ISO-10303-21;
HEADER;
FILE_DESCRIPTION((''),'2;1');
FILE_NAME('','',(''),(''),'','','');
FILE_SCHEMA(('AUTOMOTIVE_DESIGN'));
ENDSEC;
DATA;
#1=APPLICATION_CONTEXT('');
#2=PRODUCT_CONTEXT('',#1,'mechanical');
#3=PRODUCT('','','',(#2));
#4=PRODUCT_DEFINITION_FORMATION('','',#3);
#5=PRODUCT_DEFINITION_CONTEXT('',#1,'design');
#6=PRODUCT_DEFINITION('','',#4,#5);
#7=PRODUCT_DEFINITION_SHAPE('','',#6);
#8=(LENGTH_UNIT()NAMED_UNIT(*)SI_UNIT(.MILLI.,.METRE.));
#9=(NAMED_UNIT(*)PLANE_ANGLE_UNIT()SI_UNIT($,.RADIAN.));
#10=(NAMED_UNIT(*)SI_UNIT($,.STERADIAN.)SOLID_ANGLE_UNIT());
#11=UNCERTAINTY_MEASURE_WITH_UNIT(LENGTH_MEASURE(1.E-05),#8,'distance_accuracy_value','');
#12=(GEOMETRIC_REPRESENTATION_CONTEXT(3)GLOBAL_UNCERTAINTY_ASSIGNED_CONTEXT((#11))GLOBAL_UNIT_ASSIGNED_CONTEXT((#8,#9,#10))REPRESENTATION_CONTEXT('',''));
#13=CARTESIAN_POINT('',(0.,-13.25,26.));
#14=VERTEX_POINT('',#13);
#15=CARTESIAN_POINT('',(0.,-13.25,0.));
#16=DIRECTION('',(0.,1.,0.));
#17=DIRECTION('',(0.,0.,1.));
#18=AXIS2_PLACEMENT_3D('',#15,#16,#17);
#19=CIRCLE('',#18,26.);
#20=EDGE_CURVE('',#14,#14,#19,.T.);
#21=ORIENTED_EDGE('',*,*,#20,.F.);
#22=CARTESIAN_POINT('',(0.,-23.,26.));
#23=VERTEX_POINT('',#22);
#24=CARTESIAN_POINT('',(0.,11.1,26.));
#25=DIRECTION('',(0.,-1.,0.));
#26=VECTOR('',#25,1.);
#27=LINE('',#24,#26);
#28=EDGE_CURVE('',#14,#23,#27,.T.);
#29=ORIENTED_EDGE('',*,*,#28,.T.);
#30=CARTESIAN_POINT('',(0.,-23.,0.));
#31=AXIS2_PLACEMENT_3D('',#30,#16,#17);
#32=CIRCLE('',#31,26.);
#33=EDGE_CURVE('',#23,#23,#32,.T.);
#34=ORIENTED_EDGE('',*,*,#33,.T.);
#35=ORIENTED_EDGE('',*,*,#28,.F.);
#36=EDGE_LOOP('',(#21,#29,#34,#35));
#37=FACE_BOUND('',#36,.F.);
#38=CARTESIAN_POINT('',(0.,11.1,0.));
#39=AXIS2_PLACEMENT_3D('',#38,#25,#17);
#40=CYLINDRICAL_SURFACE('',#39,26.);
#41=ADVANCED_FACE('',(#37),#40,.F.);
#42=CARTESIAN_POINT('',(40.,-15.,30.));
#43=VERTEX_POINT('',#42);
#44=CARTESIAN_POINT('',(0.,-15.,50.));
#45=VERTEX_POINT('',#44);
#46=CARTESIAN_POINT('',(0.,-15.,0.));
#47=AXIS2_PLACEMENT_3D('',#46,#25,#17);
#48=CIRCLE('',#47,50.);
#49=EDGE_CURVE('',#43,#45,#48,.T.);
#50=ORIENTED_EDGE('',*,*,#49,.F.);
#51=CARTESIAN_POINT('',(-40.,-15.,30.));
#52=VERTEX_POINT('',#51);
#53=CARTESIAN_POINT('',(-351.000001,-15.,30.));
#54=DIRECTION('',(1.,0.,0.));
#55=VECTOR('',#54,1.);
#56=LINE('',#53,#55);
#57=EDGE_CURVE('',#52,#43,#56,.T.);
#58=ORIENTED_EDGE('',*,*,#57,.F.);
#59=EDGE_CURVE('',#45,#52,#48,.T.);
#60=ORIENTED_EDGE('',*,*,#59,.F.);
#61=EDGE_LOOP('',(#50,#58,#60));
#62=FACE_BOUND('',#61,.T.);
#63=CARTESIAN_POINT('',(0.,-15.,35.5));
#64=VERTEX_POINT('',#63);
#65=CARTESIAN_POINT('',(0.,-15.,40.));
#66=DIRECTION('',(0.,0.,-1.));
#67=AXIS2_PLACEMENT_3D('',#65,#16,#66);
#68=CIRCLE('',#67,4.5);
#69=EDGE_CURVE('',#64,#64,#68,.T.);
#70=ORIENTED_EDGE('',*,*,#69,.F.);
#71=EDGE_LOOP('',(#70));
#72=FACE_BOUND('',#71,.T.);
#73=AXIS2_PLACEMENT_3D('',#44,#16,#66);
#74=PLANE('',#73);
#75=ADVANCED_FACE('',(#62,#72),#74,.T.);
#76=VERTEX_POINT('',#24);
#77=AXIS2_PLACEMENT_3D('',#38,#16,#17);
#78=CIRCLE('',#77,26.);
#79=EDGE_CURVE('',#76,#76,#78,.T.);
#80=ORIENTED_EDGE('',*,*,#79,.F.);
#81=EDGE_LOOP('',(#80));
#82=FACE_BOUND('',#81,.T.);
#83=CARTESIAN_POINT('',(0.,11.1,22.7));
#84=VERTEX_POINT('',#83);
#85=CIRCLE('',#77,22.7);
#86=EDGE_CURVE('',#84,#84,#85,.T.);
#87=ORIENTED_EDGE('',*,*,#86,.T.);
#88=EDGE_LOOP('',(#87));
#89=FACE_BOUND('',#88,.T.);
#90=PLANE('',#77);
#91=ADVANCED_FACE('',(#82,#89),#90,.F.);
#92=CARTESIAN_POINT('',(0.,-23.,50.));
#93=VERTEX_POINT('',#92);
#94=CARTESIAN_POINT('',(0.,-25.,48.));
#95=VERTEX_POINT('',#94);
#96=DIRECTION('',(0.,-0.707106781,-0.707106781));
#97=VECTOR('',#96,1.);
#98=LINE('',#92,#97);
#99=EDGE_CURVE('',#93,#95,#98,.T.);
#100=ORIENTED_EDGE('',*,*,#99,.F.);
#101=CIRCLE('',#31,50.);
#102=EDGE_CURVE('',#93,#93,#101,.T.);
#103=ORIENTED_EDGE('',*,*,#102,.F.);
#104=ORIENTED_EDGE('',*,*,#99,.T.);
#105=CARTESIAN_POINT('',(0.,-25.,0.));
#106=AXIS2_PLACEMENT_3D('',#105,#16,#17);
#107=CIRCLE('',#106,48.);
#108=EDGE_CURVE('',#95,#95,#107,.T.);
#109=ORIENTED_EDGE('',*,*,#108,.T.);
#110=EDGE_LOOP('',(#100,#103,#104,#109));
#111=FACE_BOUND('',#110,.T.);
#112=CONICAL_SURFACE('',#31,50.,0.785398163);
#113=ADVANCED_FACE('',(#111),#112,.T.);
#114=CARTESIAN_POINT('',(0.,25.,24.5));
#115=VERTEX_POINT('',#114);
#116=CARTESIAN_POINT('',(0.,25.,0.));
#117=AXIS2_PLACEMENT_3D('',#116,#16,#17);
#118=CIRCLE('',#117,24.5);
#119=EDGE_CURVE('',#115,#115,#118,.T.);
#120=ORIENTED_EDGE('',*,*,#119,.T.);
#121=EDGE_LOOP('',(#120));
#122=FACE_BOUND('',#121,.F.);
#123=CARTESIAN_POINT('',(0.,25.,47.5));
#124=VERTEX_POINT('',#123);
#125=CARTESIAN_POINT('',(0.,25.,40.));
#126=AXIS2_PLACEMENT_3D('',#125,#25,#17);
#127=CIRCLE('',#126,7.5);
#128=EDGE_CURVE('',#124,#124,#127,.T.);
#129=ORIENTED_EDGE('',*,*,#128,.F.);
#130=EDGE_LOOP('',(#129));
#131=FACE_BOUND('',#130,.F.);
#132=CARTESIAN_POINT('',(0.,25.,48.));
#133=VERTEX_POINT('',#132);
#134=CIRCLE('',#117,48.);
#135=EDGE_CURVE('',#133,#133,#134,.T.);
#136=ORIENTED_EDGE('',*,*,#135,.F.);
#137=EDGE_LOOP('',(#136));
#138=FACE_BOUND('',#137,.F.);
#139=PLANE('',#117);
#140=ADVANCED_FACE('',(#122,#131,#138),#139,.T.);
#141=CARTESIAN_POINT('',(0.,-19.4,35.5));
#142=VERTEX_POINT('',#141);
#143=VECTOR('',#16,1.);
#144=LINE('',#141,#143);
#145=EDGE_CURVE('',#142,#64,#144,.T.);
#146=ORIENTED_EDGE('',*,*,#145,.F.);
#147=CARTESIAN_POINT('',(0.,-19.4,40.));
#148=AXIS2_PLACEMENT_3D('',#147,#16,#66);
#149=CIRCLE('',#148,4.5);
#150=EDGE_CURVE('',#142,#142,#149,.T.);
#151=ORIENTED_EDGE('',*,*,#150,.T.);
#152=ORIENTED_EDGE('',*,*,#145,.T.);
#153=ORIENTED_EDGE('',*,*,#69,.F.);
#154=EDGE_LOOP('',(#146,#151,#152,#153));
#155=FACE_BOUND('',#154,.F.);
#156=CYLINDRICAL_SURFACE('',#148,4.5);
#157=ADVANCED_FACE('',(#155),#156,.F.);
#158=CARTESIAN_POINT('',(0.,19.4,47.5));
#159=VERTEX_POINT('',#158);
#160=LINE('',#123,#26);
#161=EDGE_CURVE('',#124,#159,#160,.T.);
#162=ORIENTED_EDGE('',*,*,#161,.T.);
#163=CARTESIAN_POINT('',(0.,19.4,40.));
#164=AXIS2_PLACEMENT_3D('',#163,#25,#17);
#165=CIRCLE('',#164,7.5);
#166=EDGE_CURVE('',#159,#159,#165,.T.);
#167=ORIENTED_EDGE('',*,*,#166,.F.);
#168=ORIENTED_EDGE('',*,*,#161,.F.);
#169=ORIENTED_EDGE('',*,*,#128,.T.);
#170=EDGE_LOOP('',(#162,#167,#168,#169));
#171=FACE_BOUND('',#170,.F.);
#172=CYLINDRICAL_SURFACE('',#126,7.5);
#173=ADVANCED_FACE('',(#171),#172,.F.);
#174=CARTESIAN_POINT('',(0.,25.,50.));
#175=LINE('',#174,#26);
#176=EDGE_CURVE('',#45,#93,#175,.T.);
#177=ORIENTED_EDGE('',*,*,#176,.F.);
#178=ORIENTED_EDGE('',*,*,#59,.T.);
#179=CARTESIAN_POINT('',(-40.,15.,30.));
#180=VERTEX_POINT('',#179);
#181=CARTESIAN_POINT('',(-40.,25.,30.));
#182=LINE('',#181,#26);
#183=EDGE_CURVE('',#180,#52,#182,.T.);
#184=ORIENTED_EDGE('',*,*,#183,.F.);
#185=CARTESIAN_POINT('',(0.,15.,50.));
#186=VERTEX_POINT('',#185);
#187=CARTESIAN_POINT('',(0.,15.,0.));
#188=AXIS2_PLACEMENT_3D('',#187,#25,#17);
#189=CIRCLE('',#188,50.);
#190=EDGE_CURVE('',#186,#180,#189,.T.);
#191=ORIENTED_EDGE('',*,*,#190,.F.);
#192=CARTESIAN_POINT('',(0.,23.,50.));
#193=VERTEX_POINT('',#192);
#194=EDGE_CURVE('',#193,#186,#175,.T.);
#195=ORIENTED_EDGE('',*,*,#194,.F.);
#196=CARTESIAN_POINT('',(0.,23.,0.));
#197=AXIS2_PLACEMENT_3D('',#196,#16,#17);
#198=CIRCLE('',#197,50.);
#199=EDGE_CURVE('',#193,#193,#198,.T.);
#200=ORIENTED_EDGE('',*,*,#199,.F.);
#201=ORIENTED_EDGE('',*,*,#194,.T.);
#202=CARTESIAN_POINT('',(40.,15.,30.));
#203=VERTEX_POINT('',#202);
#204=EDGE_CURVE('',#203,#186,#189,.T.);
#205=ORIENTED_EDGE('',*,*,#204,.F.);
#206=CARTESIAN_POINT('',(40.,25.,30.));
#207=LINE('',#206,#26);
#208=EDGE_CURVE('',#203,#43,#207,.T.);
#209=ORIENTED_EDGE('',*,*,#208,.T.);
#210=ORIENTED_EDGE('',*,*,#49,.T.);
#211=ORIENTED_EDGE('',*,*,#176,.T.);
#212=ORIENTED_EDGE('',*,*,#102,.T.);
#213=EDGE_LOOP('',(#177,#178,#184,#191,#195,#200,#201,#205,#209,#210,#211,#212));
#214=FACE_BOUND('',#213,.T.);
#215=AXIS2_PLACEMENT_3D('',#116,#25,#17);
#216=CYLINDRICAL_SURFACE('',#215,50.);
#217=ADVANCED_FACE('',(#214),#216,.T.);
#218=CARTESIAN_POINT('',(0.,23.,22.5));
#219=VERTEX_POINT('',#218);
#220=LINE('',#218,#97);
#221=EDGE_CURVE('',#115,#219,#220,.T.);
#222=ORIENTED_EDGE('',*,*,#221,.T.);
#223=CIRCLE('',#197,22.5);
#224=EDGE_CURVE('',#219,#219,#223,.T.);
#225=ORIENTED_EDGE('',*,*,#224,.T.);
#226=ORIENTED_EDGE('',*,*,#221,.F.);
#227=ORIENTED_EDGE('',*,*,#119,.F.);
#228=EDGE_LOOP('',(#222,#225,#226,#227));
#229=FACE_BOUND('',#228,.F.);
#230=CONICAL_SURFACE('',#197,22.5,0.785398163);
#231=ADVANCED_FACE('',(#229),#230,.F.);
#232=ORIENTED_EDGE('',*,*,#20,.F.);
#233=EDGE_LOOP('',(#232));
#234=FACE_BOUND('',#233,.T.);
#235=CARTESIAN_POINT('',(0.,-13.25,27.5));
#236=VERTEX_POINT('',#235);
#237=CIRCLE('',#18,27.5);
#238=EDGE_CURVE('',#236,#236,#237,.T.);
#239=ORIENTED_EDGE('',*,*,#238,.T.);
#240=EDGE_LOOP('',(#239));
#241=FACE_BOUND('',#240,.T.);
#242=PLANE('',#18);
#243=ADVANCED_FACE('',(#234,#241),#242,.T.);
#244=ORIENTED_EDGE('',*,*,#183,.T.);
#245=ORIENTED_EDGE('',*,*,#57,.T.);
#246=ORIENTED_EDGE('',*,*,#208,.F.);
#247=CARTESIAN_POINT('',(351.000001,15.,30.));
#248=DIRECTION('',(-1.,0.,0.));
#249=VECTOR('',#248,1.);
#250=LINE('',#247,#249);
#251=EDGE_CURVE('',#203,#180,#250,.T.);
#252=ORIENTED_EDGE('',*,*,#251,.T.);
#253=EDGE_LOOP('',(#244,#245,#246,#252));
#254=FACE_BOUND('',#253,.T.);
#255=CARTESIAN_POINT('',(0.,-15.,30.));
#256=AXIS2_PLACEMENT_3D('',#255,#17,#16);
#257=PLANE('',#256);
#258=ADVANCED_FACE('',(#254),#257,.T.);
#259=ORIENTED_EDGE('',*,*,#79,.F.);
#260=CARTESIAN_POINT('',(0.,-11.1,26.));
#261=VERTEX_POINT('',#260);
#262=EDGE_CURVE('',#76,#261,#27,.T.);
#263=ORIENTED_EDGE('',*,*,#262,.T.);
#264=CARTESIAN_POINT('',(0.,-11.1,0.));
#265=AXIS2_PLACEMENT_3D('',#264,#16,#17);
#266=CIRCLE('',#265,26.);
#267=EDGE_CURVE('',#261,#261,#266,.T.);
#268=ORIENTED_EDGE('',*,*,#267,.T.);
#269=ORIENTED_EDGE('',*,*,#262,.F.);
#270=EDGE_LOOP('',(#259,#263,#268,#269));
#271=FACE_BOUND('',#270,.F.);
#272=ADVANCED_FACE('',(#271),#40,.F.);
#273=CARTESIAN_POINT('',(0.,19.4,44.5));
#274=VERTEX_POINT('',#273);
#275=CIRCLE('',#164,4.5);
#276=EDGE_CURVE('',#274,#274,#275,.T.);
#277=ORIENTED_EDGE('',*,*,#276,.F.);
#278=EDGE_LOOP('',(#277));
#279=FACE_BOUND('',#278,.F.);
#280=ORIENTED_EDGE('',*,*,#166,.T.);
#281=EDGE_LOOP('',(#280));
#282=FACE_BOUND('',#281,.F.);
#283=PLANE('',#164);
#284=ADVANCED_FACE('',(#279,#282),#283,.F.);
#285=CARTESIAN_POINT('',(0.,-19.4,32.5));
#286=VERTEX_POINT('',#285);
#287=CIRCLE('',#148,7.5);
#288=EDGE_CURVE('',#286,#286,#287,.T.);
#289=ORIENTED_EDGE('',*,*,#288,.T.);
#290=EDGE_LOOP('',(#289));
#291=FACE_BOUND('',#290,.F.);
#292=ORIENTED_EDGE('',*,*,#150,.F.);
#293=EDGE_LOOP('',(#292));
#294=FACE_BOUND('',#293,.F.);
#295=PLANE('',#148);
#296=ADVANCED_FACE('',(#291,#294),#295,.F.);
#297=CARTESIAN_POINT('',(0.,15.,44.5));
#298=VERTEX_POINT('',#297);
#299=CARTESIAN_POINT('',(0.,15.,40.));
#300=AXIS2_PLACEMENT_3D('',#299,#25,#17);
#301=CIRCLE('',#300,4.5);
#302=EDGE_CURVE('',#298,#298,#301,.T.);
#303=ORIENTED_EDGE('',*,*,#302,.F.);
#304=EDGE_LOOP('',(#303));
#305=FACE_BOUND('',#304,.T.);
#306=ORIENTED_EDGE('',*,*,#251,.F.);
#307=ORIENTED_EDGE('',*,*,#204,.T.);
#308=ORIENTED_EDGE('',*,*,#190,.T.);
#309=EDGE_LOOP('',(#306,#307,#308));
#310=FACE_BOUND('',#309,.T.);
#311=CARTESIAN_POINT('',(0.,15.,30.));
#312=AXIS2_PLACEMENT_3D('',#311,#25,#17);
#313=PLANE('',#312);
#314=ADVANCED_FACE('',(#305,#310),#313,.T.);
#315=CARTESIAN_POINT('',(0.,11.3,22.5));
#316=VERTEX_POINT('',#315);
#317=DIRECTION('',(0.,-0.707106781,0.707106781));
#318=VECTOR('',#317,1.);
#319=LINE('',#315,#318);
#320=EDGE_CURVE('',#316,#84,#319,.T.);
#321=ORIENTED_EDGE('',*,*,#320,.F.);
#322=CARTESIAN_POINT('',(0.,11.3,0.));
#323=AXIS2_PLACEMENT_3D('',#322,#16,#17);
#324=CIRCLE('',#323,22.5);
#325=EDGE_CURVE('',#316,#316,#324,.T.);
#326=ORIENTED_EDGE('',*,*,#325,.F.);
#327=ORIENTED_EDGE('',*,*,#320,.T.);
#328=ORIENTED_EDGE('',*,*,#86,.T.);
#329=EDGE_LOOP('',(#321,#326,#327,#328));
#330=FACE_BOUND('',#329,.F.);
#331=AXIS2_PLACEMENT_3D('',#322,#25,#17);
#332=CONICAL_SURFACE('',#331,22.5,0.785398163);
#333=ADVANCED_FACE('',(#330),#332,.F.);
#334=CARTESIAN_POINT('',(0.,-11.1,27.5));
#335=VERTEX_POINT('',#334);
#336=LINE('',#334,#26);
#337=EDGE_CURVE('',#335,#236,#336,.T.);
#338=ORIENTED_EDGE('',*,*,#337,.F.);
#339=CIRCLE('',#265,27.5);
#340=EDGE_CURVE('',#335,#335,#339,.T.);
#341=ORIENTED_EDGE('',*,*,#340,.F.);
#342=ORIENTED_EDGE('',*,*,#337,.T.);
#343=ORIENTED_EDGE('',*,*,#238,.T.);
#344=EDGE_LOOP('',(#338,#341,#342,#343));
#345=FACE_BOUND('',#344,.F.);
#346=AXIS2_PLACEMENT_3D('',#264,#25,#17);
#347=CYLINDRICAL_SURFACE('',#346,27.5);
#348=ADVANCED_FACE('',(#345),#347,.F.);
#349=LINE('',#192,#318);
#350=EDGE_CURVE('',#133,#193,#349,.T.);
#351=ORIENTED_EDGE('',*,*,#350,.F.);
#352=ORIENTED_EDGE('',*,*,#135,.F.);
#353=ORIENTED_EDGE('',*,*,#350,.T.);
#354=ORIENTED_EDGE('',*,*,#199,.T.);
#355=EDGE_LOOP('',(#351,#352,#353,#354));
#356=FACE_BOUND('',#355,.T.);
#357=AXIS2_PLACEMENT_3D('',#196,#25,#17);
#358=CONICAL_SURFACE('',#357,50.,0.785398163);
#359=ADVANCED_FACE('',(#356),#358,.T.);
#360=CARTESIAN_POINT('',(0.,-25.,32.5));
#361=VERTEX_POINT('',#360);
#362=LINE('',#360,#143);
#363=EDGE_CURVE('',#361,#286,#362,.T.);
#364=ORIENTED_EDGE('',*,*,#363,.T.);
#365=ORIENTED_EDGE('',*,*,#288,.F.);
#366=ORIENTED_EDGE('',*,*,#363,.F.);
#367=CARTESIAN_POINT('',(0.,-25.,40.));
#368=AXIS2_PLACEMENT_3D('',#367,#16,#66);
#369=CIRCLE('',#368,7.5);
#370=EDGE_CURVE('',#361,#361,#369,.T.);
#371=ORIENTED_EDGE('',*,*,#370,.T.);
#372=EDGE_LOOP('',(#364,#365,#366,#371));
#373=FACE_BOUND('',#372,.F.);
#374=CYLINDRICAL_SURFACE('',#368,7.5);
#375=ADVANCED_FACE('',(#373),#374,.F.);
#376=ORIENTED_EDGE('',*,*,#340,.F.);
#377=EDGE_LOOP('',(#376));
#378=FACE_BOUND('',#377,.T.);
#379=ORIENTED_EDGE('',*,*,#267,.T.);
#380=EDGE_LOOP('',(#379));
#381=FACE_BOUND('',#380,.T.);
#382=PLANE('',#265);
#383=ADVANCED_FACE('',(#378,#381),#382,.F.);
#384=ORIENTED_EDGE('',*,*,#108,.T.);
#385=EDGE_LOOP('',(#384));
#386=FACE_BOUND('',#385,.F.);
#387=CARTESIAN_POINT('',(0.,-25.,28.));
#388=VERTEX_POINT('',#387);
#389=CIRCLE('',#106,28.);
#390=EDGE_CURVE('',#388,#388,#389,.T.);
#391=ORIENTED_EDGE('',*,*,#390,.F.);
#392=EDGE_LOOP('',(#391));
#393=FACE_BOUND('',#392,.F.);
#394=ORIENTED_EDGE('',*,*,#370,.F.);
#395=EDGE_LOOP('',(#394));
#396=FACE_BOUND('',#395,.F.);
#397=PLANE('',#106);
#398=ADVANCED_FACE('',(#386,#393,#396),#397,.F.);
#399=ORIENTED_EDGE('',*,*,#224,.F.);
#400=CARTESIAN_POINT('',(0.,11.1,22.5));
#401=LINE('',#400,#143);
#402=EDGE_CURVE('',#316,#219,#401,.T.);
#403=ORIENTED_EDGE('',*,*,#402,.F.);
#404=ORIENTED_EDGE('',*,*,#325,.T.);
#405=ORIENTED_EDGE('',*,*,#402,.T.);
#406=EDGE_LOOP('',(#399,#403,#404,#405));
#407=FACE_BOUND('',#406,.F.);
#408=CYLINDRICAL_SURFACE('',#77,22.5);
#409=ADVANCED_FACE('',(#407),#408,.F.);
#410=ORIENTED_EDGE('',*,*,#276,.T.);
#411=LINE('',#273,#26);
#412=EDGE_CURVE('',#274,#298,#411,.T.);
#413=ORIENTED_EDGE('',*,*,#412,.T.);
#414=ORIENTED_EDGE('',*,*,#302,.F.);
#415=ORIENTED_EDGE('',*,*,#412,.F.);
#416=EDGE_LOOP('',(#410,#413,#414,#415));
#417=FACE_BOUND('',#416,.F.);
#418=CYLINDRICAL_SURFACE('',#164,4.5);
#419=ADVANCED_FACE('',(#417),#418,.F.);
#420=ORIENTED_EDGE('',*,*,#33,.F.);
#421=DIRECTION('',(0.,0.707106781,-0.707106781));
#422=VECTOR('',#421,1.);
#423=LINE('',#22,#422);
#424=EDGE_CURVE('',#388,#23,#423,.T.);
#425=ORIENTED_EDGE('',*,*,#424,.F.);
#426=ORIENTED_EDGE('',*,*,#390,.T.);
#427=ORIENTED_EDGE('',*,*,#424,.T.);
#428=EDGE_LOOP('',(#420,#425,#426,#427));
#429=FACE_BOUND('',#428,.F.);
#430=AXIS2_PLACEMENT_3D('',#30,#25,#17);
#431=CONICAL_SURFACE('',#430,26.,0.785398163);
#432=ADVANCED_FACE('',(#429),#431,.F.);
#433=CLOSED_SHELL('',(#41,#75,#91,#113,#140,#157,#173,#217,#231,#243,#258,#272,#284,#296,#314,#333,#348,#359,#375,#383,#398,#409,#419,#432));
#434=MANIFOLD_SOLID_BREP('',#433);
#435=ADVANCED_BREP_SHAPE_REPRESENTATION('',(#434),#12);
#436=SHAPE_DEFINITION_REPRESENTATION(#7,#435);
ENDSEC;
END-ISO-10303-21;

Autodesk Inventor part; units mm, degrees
ref_plane "YZ Plane" through (0, 0, 0) normal (1, 0, 0) x (0, 1, 0)
ref_plane "XZ Plane" through (0, 0, 0) normal (0, 1, 0) x (-1, 0, 0)
ref_plane "XY Plane" through (0, 0, 0) normal (0, 0, 1) x (1, 0, 0)
sketch "Skizze3" plane through (0, 0, 0) normal (1, 0, 0) x (0, 1, 0)
  line L0 (0, 60) -> (0, -10) construction
  line L1 (-35, 0) -> (35, 0) construction
  line L2 (25, 0) -> (25, 22.5) construction
  line L3 (25, 50) -> (-25, 50)
  line L4 (-25, 50) -> (-25, 26)
  line L5 (11.1, 0) -> (11.1, 26) construction
  line L6 (11.1, 26) -> (-11.1, 26) construction
  line L7 (-11.1, 26) -> (-11.1, 0) construction
  line L8 (11.1, 22.5) -> (25, 22.5)
  line L9 (11.1, 22.5) -> (11.1, 26)
  line L10 (11.1, 26) -> (-25, 26)
  line L11 (-25, 26) -> (-25, 0) construction
  line L12 (25, 22.5) -> (25, 50)
  point P0 (0, 0)
  dimension "d8" = 100
  dimension "d9" = 50
  dimension "d10" = 52
  dimension "d11" = 22.2
  dimension "d13" = 45
revolve "Grundkörper" add sketch "Skizze3" angle 360 about axis through (0, 0, 0) along (0, 1, 0)
sketch "Skizze4" plane through (0, 0, 0) normal (1, 0, 0) x (0, 1, 0)
  line L0 (-25, 50) -> (25, 50) construction
  line L1 (0, 48) -> (0, -8) construction
  line L2 (-15, 50) -> (-15, 30)
  line L3 (-15, 30) -> (15, 30)
  line L4 (15, 30) -> (15, 50)
  line L5 (-15, 50) -> (15, 50)
  point P0 (0, 0)
  dimension "d17" = 30
  dimension "d18" = 20
extrude "Profil_Ausschnitt" cut sketch "Skizze4" along normal through all both and the other way through all
sketch "Skizze5" plane through (0, -25, 0) normal (0, -1, 0) x (1, 0, 0)
  circle A0 centre (0, 0) radius 50 construction
  line L0 (0, 70) -> (0, -70) construction
  line L1 (-40, 30) -> (40, 30) construction
  line L2 (0, 30) -> (0, 50) construction
  point P0 (0, 40)
hole "ISO4762_M8_Boh" at (0, -25, 40) direction (0, 1, 0) diameter 9 end up to surface counterbore diameter 15 counterbore depth 5.6
mirror "Spiegelung_ISO4762_M8_Boh" about plane through (0, 0, 0) normal (0, 1, 0) of "ISO4762_M8_Boh"
sketch "Skizze7" plane through (0, 0, 0) normal (1, 0, 0) x (0, 1, 0)
  line L0 (-35, 0) -> (35, 0) construction
  line L1 (11.1, -26) -> (11.1, 26) construction
  line L2 (11.1, 26) -> (-25, 26) construction
  line L3 (-11.1, 26) -> (-11.1, 27.5)
  line L4 (-11.1, 27.5) -> (-13.25, 27.5)
  line L5 (-13.25, 27.5) -> (-13.25, 26)
  line L6 (-11.1, 26) -> (-13.25, 26)
  point P0 (0, 0)
  dimension "d34" = 55
  dimension "d35" = 2.15
  dimension "d36" = 22.2
revolve "DIN472-52x2-Nut" cut sketch "Skizze7" angle 360 about axis through (0, 0, 0) along (0, 1, 0)
chamfer "Fase_Allgemein" distance 2 angle 45 4 edges at (0, -25, -50) (0, 25, -50) (0, -25, -26) (0, 25, -22.5)
chamfer "Fase2" distance 0.2 angle 45 1 edges at (0, 11.1, -22.5)
properties part number "200-30-ROCKER-BOGIE-BEARING-01" material "Aluminium 6061"
